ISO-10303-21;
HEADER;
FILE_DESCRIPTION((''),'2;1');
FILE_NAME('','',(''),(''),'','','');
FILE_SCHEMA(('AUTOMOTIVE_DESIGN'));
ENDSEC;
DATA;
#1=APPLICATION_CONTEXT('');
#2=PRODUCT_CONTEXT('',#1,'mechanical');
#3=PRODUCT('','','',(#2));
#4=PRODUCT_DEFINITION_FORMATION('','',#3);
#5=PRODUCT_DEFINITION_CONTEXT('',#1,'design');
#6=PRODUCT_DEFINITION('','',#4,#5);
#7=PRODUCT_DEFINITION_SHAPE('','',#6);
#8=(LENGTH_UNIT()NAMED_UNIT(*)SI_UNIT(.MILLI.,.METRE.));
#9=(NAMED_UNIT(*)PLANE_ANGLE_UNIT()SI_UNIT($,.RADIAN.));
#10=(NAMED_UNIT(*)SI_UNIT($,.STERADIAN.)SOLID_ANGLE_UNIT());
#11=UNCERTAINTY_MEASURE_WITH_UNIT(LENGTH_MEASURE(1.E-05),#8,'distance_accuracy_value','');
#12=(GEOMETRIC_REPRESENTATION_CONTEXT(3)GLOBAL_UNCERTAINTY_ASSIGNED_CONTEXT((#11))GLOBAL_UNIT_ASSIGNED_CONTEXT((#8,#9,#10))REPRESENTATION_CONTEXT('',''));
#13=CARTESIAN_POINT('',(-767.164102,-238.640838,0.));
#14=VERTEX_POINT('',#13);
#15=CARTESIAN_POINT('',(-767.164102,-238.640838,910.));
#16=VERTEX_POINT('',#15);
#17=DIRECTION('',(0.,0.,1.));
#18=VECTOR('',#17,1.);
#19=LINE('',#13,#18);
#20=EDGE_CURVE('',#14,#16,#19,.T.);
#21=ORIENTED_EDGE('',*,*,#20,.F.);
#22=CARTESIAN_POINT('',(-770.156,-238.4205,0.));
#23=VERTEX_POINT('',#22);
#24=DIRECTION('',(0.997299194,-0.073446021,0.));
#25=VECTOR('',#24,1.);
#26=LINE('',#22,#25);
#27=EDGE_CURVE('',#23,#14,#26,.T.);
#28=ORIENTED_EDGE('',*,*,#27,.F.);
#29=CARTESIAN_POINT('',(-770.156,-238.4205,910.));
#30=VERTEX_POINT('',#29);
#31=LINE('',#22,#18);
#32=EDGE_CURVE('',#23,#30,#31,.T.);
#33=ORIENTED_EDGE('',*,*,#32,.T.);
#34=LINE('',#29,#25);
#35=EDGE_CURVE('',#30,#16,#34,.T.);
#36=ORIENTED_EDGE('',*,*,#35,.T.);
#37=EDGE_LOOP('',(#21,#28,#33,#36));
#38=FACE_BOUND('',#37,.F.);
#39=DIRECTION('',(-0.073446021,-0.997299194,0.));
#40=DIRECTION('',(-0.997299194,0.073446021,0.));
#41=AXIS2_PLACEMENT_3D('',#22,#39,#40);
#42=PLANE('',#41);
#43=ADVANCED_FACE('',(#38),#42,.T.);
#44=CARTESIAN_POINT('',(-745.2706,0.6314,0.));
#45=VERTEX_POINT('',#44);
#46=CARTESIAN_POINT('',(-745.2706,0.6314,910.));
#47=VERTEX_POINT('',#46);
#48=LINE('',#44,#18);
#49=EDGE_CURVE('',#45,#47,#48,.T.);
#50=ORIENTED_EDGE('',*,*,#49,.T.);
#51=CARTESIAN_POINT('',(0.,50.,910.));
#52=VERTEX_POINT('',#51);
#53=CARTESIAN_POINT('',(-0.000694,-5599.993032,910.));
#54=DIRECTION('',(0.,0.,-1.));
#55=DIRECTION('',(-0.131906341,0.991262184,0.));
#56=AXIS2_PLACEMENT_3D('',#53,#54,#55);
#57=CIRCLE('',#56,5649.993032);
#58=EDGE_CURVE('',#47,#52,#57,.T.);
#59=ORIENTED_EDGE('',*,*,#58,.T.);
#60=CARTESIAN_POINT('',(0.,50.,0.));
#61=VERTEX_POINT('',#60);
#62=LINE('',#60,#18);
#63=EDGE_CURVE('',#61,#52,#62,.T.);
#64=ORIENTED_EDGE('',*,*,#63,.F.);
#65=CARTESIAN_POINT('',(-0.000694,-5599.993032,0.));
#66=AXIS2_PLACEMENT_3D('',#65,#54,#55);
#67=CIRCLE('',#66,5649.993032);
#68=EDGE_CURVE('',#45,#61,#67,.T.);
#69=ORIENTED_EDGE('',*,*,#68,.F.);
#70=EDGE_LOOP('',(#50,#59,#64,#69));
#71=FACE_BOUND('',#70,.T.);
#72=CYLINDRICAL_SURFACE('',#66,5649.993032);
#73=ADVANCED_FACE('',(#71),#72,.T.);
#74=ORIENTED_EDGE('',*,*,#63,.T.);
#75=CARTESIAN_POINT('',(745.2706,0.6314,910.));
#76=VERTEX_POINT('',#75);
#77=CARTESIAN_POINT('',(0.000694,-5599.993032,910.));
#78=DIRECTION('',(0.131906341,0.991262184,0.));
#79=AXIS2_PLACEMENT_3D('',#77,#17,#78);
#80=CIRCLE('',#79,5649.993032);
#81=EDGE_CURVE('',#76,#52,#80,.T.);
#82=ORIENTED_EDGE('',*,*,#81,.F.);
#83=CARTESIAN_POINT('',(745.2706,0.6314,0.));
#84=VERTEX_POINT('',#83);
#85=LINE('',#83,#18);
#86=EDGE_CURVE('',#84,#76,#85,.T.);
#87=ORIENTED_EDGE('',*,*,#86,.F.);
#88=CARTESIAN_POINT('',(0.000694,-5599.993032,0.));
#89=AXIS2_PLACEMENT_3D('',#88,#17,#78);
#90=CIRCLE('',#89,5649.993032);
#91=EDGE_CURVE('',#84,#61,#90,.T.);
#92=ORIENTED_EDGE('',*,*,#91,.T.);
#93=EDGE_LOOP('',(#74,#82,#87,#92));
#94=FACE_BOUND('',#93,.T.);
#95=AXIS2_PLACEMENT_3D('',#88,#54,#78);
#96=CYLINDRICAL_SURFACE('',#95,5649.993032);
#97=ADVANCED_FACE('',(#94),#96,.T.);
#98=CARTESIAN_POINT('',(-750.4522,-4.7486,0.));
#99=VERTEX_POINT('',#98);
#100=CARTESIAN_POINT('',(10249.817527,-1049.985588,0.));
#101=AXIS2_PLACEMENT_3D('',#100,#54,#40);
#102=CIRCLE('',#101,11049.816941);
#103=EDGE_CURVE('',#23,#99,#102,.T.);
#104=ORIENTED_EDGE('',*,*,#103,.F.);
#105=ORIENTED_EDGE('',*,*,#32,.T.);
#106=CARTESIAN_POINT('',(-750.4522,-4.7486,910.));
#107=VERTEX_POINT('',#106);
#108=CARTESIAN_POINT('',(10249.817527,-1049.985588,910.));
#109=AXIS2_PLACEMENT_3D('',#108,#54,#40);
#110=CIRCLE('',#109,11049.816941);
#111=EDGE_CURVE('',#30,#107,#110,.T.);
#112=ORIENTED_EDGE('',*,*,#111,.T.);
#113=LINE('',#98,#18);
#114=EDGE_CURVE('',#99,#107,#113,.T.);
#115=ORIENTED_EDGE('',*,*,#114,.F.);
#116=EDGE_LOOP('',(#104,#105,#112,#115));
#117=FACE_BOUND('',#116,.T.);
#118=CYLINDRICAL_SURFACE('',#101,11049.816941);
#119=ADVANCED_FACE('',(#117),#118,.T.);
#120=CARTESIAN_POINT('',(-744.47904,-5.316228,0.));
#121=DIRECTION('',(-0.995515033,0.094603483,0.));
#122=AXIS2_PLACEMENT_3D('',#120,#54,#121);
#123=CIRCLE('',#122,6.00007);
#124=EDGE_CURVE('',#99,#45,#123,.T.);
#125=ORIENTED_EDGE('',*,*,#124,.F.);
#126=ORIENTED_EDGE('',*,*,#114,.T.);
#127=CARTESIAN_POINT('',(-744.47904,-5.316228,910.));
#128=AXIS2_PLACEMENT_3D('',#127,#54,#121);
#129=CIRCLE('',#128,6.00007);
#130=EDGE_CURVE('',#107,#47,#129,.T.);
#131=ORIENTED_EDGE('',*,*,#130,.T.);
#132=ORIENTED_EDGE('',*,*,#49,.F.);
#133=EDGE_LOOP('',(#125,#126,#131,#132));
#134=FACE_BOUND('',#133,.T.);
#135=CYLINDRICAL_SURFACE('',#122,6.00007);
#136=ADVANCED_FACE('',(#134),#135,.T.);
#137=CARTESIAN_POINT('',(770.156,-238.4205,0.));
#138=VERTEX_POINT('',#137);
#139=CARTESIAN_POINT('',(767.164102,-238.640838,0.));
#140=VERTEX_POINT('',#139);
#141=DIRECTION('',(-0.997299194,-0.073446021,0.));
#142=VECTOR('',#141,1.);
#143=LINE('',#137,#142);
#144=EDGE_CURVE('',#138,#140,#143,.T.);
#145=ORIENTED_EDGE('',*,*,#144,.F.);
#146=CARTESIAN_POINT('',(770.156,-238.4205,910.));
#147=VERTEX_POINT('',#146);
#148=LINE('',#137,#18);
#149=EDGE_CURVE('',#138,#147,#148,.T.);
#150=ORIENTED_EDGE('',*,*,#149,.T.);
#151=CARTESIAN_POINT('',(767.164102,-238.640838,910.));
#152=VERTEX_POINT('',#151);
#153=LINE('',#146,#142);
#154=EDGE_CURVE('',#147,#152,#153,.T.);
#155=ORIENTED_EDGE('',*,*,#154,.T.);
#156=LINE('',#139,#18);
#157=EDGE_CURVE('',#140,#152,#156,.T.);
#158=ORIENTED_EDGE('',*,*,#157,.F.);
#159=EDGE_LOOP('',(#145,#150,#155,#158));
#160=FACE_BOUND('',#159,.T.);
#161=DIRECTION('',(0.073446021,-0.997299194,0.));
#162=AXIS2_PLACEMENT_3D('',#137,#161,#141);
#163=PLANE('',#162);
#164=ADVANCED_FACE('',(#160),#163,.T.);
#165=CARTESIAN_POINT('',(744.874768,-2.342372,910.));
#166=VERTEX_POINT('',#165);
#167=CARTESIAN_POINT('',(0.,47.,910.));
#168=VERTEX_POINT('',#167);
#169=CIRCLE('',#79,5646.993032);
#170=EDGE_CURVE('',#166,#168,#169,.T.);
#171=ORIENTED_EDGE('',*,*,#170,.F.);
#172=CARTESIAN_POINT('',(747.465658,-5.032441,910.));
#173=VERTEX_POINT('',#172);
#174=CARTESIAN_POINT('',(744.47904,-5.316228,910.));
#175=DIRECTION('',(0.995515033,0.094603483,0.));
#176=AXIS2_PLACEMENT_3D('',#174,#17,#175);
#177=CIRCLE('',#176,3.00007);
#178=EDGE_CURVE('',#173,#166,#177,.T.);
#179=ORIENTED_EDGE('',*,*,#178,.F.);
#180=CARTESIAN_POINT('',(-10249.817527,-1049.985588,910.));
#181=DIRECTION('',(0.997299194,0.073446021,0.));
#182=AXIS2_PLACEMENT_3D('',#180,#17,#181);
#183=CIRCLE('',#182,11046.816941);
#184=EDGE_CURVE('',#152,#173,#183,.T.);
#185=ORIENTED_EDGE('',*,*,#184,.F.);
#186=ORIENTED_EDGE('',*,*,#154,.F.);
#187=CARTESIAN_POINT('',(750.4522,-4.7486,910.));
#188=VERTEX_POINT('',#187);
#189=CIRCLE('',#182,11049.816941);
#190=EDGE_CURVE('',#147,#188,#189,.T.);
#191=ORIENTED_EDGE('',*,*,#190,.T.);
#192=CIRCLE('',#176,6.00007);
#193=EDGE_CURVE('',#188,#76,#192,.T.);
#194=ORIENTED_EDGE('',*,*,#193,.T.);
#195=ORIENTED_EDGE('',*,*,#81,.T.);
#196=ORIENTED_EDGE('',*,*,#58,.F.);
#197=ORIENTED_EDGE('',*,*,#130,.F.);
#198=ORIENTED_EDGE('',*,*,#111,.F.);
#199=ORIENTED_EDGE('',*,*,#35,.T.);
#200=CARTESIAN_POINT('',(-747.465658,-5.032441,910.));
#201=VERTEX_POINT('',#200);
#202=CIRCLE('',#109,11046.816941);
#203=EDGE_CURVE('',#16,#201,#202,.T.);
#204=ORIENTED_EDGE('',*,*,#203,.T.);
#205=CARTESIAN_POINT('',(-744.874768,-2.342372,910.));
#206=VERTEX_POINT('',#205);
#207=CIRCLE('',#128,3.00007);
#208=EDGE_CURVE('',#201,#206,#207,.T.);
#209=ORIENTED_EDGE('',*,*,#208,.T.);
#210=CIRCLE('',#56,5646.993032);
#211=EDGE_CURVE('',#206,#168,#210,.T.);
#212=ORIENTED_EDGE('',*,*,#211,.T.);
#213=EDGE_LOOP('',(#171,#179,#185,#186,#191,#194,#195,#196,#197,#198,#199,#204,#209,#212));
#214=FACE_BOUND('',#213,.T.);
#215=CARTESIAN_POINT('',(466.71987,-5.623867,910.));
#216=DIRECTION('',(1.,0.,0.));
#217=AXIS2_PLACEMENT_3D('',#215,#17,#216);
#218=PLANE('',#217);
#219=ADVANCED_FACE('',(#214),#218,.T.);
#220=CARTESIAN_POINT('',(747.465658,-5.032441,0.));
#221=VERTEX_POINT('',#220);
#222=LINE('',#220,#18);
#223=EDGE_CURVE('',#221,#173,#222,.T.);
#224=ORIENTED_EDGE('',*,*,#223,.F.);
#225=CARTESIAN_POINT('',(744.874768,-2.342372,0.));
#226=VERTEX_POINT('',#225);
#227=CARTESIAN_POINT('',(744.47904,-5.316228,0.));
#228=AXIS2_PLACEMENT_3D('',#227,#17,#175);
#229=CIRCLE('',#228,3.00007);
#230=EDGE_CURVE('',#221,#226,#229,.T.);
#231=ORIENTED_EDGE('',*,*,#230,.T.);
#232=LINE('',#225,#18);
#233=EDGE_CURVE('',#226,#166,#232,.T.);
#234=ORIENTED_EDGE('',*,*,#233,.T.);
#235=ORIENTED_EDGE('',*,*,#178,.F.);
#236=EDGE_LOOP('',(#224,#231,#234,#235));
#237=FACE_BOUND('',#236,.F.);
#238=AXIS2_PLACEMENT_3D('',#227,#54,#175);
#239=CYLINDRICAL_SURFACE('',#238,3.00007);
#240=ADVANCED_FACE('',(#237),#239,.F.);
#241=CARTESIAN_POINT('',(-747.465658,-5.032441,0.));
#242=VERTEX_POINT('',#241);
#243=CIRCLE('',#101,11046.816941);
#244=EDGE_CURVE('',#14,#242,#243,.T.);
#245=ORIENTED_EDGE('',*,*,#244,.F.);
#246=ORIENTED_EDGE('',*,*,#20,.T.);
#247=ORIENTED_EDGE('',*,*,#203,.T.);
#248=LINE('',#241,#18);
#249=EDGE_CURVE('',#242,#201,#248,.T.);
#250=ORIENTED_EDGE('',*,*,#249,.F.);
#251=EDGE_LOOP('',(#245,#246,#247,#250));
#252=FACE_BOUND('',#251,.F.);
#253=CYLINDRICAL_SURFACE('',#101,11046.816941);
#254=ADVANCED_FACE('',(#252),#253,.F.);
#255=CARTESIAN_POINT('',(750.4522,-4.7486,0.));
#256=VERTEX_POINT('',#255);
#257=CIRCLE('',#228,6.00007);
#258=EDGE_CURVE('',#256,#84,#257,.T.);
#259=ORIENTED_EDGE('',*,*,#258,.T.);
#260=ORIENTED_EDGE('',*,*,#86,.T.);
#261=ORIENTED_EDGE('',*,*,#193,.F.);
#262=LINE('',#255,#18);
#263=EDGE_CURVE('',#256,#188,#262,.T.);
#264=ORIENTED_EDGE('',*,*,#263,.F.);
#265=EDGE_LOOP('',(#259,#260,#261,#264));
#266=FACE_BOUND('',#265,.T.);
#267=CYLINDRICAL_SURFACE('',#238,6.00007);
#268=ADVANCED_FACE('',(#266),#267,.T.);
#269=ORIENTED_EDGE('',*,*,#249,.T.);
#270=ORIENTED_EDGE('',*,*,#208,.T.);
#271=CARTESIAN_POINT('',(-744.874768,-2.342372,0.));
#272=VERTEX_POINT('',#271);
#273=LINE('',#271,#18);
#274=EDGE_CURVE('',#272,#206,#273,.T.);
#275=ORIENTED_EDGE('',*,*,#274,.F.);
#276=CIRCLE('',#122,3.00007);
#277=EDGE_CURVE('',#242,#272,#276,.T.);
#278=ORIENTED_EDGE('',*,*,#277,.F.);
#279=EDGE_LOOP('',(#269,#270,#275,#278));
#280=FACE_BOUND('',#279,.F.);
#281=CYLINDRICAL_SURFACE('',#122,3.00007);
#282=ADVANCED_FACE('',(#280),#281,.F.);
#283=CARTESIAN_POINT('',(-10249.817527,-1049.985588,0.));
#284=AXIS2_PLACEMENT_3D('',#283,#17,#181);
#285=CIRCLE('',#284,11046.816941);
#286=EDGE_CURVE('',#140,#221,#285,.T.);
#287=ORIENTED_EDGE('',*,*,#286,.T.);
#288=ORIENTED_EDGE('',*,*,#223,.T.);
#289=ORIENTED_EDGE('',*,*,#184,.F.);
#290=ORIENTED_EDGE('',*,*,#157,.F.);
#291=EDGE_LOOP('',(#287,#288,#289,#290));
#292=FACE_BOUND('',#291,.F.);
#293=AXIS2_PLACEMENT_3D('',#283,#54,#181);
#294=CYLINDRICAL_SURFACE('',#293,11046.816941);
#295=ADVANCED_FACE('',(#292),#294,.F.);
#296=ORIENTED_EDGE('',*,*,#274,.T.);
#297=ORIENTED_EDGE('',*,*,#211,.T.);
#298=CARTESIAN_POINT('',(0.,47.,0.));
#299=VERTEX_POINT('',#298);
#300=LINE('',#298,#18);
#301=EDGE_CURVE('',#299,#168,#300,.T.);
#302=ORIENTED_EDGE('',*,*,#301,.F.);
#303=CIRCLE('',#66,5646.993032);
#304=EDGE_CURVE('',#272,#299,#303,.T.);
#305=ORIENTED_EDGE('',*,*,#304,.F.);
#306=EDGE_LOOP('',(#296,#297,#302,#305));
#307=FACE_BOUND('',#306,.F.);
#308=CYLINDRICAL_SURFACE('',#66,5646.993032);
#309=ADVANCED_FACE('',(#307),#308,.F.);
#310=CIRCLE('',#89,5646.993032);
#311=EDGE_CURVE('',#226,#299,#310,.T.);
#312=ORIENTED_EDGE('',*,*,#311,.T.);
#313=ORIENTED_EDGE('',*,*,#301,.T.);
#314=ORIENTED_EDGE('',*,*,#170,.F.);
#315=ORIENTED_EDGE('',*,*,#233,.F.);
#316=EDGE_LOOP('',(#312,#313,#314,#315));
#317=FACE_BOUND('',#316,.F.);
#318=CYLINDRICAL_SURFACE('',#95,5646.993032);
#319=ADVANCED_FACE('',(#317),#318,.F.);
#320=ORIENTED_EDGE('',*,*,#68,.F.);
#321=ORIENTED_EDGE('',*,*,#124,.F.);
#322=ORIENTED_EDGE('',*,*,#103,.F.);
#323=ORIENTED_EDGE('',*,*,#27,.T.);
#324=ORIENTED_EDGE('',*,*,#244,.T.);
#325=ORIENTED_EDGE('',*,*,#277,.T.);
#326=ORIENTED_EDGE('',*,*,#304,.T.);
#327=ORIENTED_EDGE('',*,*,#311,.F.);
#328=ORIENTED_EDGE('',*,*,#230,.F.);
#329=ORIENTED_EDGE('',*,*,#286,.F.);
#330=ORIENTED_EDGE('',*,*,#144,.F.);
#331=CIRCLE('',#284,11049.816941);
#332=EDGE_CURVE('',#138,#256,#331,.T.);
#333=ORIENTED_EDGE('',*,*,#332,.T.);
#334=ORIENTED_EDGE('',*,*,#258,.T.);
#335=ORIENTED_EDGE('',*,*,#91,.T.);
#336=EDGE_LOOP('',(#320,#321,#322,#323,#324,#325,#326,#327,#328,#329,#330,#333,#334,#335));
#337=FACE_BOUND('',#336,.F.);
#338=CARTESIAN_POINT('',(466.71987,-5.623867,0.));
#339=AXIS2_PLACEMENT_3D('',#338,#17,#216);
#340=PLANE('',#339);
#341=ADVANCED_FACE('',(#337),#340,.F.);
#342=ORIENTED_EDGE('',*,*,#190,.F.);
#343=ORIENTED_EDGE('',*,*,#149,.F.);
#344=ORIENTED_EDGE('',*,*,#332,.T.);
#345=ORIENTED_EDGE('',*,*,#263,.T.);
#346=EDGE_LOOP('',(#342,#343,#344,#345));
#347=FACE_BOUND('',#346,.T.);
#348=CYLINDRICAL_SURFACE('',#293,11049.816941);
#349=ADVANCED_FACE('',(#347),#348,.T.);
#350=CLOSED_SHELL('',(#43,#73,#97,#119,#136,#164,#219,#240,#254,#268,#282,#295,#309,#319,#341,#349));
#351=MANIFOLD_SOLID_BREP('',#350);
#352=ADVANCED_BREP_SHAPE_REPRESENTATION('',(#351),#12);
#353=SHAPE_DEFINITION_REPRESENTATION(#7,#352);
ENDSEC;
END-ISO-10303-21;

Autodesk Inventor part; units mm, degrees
ref_plane "YZ Plane" through (0, 0, 0) normal (1, 0, 0) x (0, 1, 0)
ref_plane "XZ Plane" through (0, 0, 0) normal (0, 1, 0) x (-1, 0, 0)
ref_plane "XY Plane" through (0, 0, 0) normal (0, 0, 1) x (1, 0, 0)
sketch "Sketch1" plane through (0, 0, 0) normal (0, 0, 1) x (1, 0, 0)
  line L0 (-750, 0) -> (750, 0) construction
  line L1 (750, 0) -> (750, -2700) construction
  line L2 (750, -2700) -> (-750, -2700) construction
  line L3 (-750, -2700) -> (-750, 0) construction
  line L4 (800, 50) -> (-800, 50) construction
  line L5 (-800, 50) -> (-800, -2750) construction
  line L6 (-800, -2750) -> (800, -2750) construction
  line L7 (800, -2750) -> (800, 50) construction
  line L8 (-850, 100) -> (850, 100) construction
  line L9 (850, 100) -> (850, -2800) construction
  line L10 (850, -2800) -> (-850, -2800) construction
  line L11 (-850, -2800) -> (-850, 100) construction
  arc A0 (750, 0) -> (745.2706, 0.6314) centre (0, -5600) ccw construction
  line L12 (-750, -2100) -> (750, -2100) construction
  line L13 (114.1118, -2698.3696) -> (750, -2100) construction
  arc A1 (750, -2100) -> (770.156, -238.4205) centre (-10250, -1050) ccw construction
  line L14 (750, 0) -> (749.6018, -2.9735) construction
  arc A2 (750, -3.0268) -> (0, 47) centre (-0.2, -5603) ccw construction
  line L15 (750, 0) -> (747.0136, -0.2851) construction
  arc A3 (767.1641, -238.6409) -> (747.4657, -5.0326) centre (-10252.9895, -1050.2527) ccw construction
  arc A4 (750.4522, -4.7486) -> (745.2706, 0.6314) centre (744.4791, -5.3162) ccw
  arc A5 (747.4657, -5.0326) -> (744.8748, -2.3426) centre (744.4792, -5.3164) ccw construction
  line L16 (750, -2100) -> (752.9864, -2100.2851) construction
  arc A6 (752.9864, -2100.2851) -> (771.2831, -213.263) centre (-10246.9891, -1050.0292) ccw construction
  line L17 (750, -2100) -> (752.0559, -2102.1848) construction
  line L18 (752.0559, -2102.1848) -> (752.0559, -2102.1848) construction
  arc A7 (749.1768, -2100.7746) -> (750.1074, -2098.8746) centre (747.1209, -2098.5898) ccw construction
  line L19 (0, -2697) -> (110, -2697) construction
  line L20 (112.0559, -2696.1848) -> (685.3133, -2156.7506) construction
  arc A8 (110, -2700) -> (114.1118, -2698.3696) centre (110, -2694) ccw construction
  arc A9 (110, -2697) -> (112.0559, -2696.1848) centre (110, -2694) ccw construction
  line L21 (685.3133, -2156.7506) -> (687.3692, -2158.9354) construction
  line L22 (752.0559, -2102.1848) -> (671.2185, -2178.2526) construction
  line L23 (671.2185, -2178.2526) -> (669.1626, -2176.0678) construction
  arc A10 (747.4657, -5.0326) -> (747.0136, -0.2851) centre (-10252.9895, -1050.2527) ccw construction
  arc A11 (745.2706, 0.6314) -> (0, 50) centre (0, -5600) ccw
  arc A12 (750.4522, -4.7486) -> (750, 0) centre (-10250, -1050) ccw construction
  line L24 (770.156, -238.4205) -> (767.1641, -238.6409) construction
  line L25 (768.2917, -213.4901) -> (771.2831, -213.263) construction
  arc A13 (770.156, -238.4205) -> (750.4522, -4.7486) centre (-10250, -1050) ccw
  line L26 (0, 100) -> (0, 50) construction
  line L27 (0, -2700) -> (0, -2697) construction
  line L28 (0, 47) -> (0, 0) construction
  line L29 (0, 50) -> (0, 47) construction
  arc A14 (752.0559, -2102.1848) -> (752.9864, -2100.2851) centre (749.9998, -2099.9999) ccw construction
  point P0 (0, -2750)
  dimension "d54" = 1500
  dimension "d55" = 2700
  dimension "d58" = 2100
  dimension "d68" = 6
  dimension "d70" = 3
  dimension "d75" = 3
  dimension "d83" = 6
  dimension "d86" = 3
  dimension "d112" = 239.271
  dimension "d113" = 50
  dimension "d114" = 50
  dimension "d115" = 3
  dimension "d117" = 110
  dimension "d118" = 25
  dimension "d119" = 111
  dimension "d120" = 25
contour flange "Contour Flange2" sketch "Sketch1" thickness 3 bend radius 3 width 910 along (0, 0, 1) mid plane no both sides no wall seen from (760.924, -121.5323, 0) lies toward (-0.9964637, -0.0840242, 0) curves A13 A4 A11
bend "Bend2"
corner "Corner2"
mirror "Mirror2" about plane through (0, 0, 0) normal (1, 0, 0)
equation "\"d36\" = Thickness"
equation "\"d37\" = BendReliefWidth"
equation "\"d38\" = BendReliefDepth"
equation "\"d39\" = MinimumRemnant"
equation "\"d40\" = TransitionRadius"
equation "\"d42\" = BendRadius"
equation "\"d44\" = CornerReliefSize"
equation "\"d45\" = GapSize"
equation "\"d46\" = JacobiRadiusSize"
equation "\"BendRadius\" = Thickness"
equation "\"BendReliefWidth\" = Thickness"
equation "\"BendReliefDepth\" = 0.5 * Thickness"
equation "\"CornerReliefSize\" = 4 * Thickness"
equation "\"MinimumRemnant\" = 2 * Thickness"
equation "\"TransitionRadius\" = BendRadius"
equation "\"JacobiRadiusSize\" = BendRadius"
equation "\"GapSize\" = Thickness"
equation "\"Thickness\" = 3"
properties part number "МОО 032 лист magic back-lowerback" material "Stainless Steel AISI 304"
